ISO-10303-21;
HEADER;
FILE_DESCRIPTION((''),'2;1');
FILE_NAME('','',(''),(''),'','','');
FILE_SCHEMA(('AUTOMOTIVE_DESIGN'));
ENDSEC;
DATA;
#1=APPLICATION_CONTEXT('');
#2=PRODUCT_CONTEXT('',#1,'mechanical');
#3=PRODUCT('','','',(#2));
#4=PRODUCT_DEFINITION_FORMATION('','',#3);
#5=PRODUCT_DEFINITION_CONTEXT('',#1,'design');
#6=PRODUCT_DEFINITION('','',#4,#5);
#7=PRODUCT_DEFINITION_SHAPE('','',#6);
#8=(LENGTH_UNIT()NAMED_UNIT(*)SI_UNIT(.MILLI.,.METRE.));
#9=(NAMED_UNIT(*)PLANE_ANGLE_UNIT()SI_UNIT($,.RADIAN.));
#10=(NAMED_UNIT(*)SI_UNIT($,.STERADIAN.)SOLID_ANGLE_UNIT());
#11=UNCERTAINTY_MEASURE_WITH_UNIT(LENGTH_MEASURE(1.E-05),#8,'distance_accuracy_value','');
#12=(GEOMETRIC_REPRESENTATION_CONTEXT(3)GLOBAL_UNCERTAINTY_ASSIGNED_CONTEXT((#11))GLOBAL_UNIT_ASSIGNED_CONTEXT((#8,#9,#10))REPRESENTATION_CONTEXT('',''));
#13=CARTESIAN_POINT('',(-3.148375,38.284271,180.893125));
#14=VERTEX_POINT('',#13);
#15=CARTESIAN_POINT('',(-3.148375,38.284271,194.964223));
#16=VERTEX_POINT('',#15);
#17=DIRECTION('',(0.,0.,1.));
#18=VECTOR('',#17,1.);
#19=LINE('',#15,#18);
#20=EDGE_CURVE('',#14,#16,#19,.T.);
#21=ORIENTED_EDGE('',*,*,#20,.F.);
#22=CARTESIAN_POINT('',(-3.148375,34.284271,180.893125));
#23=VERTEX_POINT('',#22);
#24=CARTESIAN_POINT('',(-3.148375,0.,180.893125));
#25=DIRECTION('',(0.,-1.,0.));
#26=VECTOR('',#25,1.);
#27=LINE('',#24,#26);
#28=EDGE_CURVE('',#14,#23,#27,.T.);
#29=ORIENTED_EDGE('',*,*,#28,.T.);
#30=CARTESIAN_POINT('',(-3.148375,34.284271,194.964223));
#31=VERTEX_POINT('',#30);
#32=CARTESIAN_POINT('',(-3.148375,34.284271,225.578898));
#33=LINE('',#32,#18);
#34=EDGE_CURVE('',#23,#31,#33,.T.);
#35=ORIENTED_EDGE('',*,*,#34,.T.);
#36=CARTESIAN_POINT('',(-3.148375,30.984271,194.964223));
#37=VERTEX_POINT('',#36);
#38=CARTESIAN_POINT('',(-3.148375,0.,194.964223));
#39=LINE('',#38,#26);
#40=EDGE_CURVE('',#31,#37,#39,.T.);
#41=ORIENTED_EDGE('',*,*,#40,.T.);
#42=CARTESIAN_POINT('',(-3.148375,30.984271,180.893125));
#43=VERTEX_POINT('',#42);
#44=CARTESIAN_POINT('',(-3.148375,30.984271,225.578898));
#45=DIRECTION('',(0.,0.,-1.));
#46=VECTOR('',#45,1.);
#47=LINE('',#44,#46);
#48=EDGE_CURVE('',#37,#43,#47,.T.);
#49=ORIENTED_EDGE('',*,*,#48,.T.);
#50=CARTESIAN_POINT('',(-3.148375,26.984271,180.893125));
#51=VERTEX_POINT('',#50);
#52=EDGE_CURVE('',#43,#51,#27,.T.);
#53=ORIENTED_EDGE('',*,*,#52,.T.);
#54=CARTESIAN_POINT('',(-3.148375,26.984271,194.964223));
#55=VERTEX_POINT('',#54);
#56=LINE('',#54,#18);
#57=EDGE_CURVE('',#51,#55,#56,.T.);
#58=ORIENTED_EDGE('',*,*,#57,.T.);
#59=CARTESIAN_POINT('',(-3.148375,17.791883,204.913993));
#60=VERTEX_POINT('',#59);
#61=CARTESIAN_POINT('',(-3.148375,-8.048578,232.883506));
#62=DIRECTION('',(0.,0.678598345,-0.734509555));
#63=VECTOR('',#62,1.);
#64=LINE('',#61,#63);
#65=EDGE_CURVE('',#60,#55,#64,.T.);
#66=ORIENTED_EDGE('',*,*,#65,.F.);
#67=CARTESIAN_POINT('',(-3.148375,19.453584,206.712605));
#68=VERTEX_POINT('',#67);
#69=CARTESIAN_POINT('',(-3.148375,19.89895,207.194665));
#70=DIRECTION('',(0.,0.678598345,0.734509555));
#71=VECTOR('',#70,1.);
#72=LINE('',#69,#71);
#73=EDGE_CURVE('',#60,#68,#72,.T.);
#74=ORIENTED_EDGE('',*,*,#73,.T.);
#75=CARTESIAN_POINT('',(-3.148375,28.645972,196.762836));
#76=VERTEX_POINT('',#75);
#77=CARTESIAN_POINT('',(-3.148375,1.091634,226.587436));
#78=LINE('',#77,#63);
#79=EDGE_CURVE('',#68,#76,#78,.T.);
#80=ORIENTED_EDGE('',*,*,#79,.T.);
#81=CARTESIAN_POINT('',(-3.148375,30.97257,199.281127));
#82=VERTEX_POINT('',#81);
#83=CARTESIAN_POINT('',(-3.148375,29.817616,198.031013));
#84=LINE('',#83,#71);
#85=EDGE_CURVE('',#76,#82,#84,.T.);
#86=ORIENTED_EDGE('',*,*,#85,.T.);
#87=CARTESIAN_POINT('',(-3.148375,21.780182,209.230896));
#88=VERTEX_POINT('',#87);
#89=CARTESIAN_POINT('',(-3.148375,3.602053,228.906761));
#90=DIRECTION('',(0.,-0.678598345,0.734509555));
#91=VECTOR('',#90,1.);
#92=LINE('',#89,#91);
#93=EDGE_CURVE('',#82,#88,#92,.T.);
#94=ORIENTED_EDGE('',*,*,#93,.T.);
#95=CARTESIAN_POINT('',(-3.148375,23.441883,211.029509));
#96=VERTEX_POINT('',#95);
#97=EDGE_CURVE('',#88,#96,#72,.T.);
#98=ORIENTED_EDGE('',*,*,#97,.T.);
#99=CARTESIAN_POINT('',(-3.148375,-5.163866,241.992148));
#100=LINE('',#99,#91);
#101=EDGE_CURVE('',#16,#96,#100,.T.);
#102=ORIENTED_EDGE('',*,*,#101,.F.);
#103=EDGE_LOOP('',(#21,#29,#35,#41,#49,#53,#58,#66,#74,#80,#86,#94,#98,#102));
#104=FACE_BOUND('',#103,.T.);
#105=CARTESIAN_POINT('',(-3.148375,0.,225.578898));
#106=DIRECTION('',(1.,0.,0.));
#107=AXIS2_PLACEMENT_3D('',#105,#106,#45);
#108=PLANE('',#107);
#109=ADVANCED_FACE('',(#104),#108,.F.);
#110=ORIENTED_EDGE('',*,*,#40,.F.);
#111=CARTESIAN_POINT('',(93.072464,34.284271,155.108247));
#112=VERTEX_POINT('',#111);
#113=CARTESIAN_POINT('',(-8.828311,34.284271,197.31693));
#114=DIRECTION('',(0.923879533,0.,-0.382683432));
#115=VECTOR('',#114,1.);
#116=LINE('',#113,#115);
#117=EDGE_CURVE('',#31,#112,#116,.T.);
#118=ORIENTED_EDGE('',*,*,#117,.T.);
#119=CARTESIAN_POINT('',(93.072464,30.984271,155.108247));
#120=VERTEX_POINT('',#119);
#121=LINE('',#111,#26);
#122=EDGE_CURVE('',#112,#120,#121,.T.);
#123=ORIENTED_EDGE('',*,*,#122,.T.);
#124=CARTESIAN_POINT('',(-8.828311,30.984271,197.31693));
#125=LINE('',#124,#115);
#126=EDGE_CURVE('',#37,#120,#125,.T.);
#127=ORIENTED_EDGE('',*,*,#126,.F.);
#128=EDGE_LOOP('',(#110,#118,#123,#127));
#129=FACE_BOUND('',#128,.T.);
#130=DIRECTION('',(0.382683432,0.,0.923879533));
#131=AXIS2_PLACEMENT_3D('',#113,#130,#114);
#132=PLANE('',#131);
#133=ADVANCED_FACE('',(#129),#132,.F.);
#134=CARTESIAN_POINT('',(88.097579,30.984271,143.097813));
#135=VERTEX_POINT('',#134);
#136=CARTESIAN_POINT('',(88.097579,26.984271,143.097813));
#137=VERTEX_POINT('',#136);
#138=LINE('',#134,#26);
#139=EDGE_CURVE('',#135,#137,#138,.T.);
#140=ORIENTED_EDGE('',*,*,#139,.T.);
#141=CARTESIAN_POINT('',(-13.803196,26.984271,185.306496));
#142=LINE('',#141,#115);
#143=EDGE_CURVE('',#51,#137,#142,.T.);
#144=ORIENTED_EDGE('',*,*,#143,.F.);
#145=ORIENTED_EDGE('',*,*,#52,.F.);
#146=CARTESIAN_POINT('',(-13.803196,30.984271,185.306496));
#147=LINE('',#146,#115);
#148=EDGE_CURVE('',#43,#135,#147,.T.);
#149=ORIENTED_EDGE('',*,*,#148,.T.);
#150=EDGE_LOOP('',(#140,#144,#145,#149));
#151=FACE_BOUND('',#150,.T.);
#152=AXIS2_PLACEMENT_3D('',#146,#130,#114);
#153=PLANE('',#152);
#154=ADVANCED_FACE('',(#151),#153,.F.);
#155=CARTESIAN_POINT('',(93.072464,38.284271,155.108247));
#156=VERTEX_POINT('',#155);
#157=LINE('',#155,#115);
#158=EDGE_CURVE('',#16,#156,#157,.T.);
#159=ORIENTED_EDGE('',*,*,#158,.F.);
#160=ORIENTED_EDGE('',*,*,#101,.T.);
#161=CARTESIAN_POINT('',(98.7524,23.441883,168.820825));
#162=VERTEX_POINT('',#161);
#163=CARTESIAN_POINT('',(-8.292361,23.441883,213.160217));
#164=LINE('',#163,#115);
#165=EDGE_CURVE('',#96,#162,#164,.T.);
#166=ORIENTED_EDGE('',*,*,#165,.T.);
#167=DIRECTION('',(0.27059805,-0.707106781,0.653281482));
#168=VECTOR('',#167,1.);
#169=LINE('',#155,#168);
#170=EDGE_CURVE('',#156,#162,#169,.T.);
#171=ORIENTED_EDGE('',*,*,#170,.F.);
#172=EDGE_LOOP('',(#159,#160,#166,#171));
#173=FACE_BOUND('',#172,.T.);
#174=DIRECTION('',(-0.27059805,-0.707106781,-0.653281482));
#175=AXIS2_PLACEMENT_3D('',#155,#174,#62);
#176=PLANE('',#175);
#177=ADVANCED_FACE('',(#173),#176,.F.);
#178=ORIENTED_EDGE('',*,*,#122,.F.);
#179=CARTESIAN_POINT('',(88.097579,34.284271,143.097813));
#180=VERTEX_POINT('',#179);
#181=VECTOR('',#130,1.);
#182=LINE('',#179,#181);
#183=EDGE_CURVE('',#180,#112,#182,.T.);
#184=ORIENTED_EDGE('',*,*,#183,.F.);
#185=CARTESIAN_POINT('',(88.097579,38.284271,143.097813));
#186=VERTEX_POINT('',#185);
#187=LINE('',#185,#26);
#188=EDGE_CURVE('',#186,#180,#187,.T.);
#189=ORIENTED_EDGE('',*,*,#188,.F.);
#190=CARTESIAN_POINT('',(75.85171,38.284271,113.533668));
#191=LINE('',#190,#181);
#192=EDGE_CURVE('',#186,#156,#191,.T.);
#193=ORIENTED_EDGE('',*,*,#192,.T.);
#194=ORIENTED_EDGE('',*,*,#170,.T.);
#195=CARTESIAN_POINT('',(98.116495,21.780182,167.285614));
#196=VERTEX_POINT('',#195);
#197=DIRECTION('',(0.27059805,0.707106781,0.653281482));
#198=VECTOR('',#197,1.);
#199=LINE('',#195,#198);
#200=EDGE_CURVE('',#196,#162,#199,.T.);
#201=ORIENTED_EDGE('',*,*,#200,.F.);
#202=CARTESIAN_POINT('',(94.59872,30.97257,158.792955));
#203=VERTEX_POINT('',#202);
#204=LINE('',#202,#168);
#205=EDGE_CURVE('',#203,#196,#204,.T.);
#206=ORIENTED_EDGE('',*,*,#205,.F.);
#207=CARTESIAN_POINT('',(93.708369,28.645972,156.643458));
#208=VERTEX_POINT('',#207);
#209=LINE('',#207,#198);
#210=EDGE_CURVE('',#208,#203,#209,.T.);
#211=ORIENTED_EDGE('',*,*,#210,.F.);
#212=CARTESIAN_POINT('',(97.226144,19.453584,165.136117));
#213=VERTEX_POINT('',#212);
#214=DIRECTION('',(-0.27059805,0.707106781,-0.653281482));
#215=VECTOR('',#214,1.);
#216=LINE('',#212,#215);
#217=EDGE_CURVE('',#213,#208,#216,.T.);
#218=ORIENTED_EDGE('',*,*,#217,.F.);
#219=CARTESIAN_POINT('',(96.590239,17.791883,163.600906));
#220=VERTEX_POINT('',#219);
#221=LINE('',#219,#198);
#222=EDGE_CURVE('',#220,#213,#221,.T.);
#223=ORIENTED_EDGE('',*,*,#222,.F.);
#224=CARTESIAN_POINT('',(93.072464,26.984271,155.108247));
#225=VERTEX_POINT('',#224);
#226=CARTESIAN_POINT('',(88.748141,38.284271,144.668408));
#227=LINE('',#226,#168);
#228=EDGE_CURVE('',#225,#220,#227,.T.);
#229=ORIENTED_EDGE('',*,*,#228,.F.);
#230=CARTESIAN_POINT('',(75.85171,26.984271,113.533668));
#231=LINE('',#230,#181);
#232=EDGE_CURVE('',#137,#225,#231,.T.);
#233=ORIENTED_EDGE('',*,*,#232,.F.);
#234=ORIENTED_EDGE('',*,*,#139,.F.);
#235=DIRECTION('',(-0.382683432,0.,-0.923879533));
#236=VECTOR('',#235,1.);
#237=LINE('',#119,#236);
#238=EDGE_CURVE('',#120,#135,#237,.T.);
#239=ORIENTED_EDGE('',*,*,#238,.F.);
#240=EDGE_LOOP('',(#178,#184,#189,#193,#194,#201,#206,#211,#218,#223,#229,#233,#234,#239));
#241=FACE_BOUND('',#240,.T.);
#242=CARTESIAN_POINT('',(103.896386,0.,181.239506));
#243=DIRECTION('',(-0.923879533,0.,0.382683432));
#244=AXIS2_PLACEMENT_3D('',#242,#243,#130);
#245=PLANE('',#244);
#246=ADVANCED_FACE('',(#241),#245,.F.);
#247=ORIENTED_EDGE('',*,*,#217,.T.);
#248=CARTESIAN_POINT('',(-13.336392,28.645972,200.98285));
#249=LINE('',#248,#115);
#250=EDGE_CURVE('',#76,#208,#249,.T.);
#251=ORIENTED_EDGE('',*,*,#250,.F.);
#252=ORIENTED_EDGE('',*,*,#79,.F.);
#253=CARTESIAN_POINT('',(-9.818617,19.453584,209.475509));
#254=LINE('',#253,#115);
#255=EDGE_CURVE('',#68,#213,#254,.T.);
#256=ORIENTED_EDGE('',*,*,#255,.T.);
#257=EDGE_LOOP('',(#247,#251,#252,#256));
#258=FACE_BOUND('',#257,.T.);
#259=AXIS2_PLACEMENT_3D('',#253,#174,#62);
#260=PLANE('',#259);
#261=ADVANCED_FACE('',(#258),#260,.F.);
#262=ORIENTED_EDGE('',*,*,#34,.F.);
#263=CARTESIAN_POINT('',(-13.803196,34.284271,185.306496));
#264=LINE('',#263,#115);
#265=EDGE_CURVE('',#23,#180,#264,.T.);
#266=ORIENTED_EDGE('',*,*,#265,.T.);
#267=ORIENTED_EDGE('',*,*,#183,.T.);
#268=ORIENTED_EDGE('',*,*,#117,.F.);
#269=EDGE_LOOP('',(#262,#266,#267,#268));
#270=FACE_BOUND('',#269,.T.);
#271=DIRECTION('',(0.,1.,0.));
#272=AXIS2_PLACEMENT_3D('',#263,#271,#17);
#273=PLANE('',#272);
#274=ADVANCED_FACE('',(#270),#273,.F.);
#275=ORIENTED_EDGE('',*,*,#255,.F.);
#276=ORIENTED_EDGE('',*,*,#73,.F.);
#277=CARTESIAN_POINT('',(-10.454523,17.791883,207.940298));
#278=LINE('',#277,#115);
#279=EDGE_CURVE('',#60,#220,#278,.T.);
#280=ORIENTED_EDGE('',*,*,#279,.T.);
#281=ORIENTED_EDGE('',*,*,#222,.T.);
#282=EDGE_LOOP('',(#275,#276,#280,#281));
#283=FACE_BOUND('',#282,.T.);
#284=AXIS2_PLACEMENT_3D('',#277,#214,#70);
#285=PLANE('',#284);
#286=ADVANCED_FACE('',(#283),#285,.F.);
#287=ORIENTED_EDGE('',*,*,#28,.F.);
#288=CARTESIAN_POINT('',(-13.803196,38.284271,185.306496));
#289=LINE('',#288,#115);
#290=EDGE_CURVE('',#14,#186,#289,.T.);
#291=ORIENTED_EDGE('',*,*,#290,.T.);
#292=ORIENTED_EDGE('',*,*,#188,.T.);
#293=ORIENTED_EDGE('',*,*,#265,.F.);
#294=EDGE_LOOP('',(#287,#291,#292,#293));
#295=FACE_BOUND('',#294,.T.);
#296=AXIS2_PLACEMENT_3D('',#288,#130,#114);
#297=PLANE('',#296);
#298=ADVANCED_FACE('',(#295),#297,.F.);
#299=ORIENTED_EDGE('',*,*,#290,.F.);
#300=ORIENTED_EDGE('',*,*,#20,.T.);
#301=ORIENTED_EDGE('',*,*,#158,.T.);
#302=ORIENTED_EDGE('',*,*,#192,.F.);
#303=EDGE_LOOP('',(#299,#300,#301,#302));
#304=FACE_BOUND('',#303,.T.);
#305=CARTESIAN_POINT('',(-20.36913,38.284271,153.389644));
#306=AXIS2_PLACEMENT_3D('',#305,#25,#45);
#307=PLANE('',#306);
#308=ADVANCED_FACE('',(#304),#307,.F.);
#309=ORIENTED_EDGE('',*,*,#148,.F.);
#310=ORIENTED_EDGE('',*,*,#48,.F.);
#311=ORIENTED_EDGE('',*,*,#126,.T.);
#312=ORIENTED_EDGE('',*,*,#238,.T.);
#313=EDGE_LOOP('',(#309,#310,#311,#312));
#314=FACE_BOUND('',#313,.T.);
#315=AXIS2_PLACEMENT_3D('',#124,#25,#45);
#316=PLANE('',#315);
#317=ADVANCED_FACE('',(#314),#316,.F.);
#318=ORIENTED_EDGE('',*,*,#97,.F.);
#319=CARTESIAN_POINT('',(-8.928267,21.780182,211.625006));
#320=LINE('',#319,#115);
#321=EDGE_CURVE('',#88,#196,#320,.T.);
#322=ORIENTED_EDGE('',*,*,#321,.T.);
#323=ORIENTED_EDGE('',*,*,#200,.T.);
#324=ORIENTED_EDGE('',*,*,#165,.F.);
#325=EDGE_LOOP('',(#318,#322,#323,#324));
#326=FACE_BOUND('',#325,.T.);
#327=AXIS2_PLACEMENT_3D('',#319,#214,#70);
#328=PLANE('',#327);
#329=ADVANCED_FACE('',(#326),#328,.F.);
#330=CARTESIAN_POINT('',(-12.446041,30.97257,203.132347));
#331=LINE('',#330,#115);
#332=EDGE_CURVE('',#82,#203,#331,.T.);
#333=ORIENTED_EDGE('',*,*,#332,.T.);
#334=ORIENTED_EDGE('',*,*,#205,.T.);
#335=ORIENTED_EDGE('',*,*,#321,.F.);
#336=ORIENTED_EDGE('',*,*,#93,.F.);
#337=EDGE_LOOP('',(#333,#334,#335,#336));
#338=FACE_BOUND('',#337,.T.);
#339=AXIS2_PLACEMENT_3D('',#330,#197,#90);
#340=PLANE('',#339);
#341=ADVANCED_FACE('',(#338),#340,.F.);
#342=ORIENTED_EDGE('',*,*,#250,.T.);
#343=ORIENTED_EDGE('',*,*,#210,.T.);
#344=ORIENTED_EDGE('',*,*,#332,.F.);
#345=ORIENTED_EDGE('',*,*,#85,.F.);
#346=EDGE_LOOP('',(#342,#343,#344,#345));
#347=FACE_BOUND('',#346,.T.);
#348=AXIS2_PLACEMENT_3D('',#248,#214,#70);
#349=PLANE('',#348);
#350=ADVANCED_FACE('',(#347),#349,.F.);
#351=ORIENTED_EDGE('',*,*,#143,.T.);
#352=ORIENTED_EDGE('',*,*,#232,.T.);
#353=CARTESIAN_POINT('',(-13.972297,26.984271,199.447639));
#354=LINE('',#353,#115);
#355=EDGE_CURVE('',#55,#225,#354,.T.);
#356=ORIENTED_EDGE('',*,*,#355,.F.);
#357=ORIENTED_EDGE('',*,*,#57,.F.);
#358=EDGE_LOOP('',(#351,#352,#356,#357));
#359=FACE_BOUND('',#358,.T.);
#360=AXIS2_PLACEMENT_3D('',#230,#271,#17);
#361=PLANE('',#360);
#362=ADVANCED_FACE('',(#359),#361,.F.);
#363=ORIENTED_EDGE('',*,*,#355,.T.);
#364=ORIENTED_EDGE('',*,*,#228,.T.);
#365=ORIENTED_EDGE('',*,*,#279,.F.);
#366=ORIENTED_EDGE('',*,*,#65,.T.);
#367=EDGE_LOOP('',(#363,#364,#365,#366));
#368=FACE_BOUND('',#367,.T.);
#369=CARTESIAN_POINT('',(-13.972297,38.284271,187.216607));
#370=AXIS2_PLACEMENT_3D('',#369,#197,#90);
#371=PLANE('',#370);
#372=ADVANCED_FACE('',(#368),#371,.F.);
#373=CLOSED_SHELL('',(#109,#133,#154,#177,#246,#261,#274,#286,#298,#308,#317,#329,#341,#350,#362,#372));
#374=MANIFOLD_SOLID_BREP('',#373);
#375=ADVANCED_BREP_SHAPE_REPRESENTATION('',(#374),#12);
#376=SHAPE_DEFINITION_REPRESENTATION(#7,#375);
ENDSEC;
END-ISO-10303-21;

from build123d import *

# Parameters (mm, degrees)
SKETCH1_W           = 214.089522673
SKETCH1_H           = 271.033566845
BOSS_EXTRUDE1_DEPTH = 10
SKETCH3_W           = 107.044761337
SKETCH3_H           = 271.033566845
CUT_EXTRUDE1_DEPTH  = 252.253590179
CUT_EXTRUDE2_DEPTH  = 249.55642867
BOSS_EXTRUDE3_DEPTH = 40
CUT_EXTRUDE3_START  = -165.689856025
CUT_EXTRUDE3_DEPTH  = 205.862728092
CUT_EXTRUDE4_DEPTH  = 250.960593361
CUT_EXTRUDE5_DEPTH  = 250.960593361
CUT_EXTRUDE11_DEPTH = 252.67545035
SKETCH26_W          = 104.148686
SKETCH26_H          = 11.3
BOSS_EXTRUDE7_DEPTH = 45
CUT_EXTRUDE12_DEPTH = 250.816831154
CUT_EXTRUDE13_DEPTH = 252.67545035
CUT_EXTRUDE14_DEPTH = 237.436663672


with BuildPart() as part:
    # Sketch1 → Boss-Extrude1 (new body)
    with BuildSketch(Plane(origin=(0, 0, 0), x_dir=(1, 0, 0), z_dir=(0, 1, 0))):
        with Locations((-3.148375333, -90.062114546)):
            Rectangle(SKETCH1_W, SKETCH1_H)
    extrude(amount=BOSS_EXTRUDE1_DEPTH)

    # Sketch3 → Cut-Extrude1 (cut, through all)
    with BuildSketch(Plane(origin=(0, 10, 0), x_dir=(1, 0, 0), z_dir=(0, 1, 0))):
        with Locations((-56.670756002, -90.062114546)):
            Rectangle(SKETCH3_W, SKETCH3_H)
    extrude(amount=-CUT_EXTRUDE1_DEPTH, mode=Mode.SUBTRACT)

    # Sketch4 → Cut-Extrude2 (cut, through all)
    with BuildSketch(Plane(origin=(0, 10, 0), x_dir=(1, 0, 0), z_dir=(0, 1, 0))):
        Polygon((103.896386003, -181.239506042), (100.834918545, -173.848469781), (9.996584241, 45.454668877), (103.896386003, 45.454668877), align=None)
    extrude(amount=-CUT_EXTRUDE2_DEPTH, mode=Mode.SUBTRACT)

    # Sketch6 → Boss-Extrude3 (add, along a direction that is not the sketch's normal)
    with BuildSketch(Plane(origin=(0, 10, 0), x_dir=(1, 0, 0), z_dir=(0, 1, 0))):
        Polygon((99.572063218, -170.799667324), (103.896386003, -181.239506042), (-3.148375333, -225.578897968), (-3.148375333, -213.347866105), align=None)
    extrude(amount=BOSS_EXTRUDE3_DEPTH, dir=(-0.2705980500730979, 0.7071067811865489, -0.6532814824381872))

    # Cut-Extrude3: read off the stored shape, not the designer's step
    # Cut-Extrude3 outline → Cut-Extrude3 (cut)
    with BuildSketch(Plane(origin=(0, 0, 0), x_dir=(1, 0, 0), z_dir=(0, 0.6785983445458481, -0.7345095552677544)).offset(CUT_EXTRUDE3_START)):
        Polygon((-3.148375333, -165), (-3.148375333, -152.122604304), (-13.972297336, -155.165042499), (-15, -155.45391393), (-15, -165), align=None)
    extrude(amount=CUT_EXTRUDE3_DEPTH, mode=Mode.SUBTRACT)

    # Sketch8 → Cut-Extrude4 (cut, through all)
    with BuildSketch(Plane(origin=(0, 10, 0), x_dir=(1, 0, 0), z_dir=(0, 1, 0))):
        Polygon((-3.148375333, -225.578897968), (103.896386003, -181.239506042), (103.896386003, -225.578897968), align=None)
    extrude(amount=-CUT_EXTRUDE4_DEPTH, mode=Mode.SUBTRACT)

    # Sketch9 → Cut-Extrude5 (cut, through all)
    with BuildSketch(Plane(origin=(0, 10, 0), x_dir=(1, 0, 0), z_dir=(0, 1, 0))):
        Polygon((-3.148375333, -213.347866105), (99.572063218, -170.799667324), (9.996584241, 45.454668877), (-3.148375333, 45.454668877), align=None)
    extrude(amount=-CUT_EXTRUDE5_DEPTH, mode=Mode.SUBTRACT)

    # Sketch25 → Cut-Extrude11 (cut, through all)
    with BuildSketch(Plane(origin=(24.603270673, 0, -10.191008392), x_dir=(-0.38268343236508967, 0, -0.9238795325112868), z_dir=(0.9238795325112867, 0, -0.3826834323650896))):
        Polygon((-178.918624473, 38.284271247), (-178.918624473, 26.984271247), (-167.618624473, 38.284271247), align=None)
    extrude(amount=-CUT_EXTRUDE11_DEPTH, mode=Mode.SUBTRACT)

    # Sketch26 → Boss-Extrude7 (add)
    with BuildSketch(Plane(origin=(68.469193327, 0, 165.299255136), x_dir=(-0.9238795325112868, 0, 0.3826834323650896), z_dir=(-0.38268343236508956, 0, -0.9238795325112867))):
        with Locations((25.443954722, 32.634271247)):
            Rectangle(SKETCH26_W, SKETCH26_H)
    extrude(amount=BOSS_EXTRUDE7_DEPTH)

    # Sketch27 → Cut-Extrude12 (cut, through all)
    with BuildSketch(Plane.XZ.offset(-26.984271247)):
        Polygon((-3.148375333, 194.964223379), (-3.148375333, 146.256574366), (-20.36912979, 153.389644416), align=None)
    extrude(amount=-CUT_EXTRUDE12_DEPTH, mode=Mode.SUBTRACT)

    # Sketch29 → Cut-Extrude13 (cut, through all)
    with BuildSketch(Plane(origin=(24.603270673, 0, -10.191008392), x_dir=(-0.38268343236508967, 0, -0.9238795325112868), z_dir=(0.9238795325112867, 0, -0.3826834323650896))):
        Polygon((-188.111012628, 17.791883092), (-189.772713564, 19.453584028), (-180.580325409, 28.645972183), (-182.906923537, 30.972570312), (-192.099311693, 21.780182156), (-193.761012628, 23.441883092), (-207.20289572, 10), (-207.20289572, 0), (-195.90289572, 0), (-195.90289572, 10), align=None)
    extrude(amount=-CUT_EXTRUDE13_DEPTH, mode=Mode.SUBTRACT)

    # Sketch31 → Cut-Extrude14 (cut, through all)
    with BuildSketch(Plane(origin=(24.603270673, 0, -10.191008392), x_dir=(-0.38268343236508967, 0, -0.9238795325112868), z_dir=(0.9238795325112867, 0, -0.3826834323650896))):
        Polygon((-133.918624473, 38.284271247), (-165.918624473, 38.284271247), (-165.918624473, 34.284271247), (-178.918624473, 34.284271247), (-178.918624473, 30.984271247), (-165.918624473, 30.984271247), (-165.918624473, 26.984271247), (-133.918624473, 26.984271247), align=None)
    extrude(amount=-CUT_EXTRUDE14_DEPTH, mode=Mode.SUBTRACT)


solid = part.part
